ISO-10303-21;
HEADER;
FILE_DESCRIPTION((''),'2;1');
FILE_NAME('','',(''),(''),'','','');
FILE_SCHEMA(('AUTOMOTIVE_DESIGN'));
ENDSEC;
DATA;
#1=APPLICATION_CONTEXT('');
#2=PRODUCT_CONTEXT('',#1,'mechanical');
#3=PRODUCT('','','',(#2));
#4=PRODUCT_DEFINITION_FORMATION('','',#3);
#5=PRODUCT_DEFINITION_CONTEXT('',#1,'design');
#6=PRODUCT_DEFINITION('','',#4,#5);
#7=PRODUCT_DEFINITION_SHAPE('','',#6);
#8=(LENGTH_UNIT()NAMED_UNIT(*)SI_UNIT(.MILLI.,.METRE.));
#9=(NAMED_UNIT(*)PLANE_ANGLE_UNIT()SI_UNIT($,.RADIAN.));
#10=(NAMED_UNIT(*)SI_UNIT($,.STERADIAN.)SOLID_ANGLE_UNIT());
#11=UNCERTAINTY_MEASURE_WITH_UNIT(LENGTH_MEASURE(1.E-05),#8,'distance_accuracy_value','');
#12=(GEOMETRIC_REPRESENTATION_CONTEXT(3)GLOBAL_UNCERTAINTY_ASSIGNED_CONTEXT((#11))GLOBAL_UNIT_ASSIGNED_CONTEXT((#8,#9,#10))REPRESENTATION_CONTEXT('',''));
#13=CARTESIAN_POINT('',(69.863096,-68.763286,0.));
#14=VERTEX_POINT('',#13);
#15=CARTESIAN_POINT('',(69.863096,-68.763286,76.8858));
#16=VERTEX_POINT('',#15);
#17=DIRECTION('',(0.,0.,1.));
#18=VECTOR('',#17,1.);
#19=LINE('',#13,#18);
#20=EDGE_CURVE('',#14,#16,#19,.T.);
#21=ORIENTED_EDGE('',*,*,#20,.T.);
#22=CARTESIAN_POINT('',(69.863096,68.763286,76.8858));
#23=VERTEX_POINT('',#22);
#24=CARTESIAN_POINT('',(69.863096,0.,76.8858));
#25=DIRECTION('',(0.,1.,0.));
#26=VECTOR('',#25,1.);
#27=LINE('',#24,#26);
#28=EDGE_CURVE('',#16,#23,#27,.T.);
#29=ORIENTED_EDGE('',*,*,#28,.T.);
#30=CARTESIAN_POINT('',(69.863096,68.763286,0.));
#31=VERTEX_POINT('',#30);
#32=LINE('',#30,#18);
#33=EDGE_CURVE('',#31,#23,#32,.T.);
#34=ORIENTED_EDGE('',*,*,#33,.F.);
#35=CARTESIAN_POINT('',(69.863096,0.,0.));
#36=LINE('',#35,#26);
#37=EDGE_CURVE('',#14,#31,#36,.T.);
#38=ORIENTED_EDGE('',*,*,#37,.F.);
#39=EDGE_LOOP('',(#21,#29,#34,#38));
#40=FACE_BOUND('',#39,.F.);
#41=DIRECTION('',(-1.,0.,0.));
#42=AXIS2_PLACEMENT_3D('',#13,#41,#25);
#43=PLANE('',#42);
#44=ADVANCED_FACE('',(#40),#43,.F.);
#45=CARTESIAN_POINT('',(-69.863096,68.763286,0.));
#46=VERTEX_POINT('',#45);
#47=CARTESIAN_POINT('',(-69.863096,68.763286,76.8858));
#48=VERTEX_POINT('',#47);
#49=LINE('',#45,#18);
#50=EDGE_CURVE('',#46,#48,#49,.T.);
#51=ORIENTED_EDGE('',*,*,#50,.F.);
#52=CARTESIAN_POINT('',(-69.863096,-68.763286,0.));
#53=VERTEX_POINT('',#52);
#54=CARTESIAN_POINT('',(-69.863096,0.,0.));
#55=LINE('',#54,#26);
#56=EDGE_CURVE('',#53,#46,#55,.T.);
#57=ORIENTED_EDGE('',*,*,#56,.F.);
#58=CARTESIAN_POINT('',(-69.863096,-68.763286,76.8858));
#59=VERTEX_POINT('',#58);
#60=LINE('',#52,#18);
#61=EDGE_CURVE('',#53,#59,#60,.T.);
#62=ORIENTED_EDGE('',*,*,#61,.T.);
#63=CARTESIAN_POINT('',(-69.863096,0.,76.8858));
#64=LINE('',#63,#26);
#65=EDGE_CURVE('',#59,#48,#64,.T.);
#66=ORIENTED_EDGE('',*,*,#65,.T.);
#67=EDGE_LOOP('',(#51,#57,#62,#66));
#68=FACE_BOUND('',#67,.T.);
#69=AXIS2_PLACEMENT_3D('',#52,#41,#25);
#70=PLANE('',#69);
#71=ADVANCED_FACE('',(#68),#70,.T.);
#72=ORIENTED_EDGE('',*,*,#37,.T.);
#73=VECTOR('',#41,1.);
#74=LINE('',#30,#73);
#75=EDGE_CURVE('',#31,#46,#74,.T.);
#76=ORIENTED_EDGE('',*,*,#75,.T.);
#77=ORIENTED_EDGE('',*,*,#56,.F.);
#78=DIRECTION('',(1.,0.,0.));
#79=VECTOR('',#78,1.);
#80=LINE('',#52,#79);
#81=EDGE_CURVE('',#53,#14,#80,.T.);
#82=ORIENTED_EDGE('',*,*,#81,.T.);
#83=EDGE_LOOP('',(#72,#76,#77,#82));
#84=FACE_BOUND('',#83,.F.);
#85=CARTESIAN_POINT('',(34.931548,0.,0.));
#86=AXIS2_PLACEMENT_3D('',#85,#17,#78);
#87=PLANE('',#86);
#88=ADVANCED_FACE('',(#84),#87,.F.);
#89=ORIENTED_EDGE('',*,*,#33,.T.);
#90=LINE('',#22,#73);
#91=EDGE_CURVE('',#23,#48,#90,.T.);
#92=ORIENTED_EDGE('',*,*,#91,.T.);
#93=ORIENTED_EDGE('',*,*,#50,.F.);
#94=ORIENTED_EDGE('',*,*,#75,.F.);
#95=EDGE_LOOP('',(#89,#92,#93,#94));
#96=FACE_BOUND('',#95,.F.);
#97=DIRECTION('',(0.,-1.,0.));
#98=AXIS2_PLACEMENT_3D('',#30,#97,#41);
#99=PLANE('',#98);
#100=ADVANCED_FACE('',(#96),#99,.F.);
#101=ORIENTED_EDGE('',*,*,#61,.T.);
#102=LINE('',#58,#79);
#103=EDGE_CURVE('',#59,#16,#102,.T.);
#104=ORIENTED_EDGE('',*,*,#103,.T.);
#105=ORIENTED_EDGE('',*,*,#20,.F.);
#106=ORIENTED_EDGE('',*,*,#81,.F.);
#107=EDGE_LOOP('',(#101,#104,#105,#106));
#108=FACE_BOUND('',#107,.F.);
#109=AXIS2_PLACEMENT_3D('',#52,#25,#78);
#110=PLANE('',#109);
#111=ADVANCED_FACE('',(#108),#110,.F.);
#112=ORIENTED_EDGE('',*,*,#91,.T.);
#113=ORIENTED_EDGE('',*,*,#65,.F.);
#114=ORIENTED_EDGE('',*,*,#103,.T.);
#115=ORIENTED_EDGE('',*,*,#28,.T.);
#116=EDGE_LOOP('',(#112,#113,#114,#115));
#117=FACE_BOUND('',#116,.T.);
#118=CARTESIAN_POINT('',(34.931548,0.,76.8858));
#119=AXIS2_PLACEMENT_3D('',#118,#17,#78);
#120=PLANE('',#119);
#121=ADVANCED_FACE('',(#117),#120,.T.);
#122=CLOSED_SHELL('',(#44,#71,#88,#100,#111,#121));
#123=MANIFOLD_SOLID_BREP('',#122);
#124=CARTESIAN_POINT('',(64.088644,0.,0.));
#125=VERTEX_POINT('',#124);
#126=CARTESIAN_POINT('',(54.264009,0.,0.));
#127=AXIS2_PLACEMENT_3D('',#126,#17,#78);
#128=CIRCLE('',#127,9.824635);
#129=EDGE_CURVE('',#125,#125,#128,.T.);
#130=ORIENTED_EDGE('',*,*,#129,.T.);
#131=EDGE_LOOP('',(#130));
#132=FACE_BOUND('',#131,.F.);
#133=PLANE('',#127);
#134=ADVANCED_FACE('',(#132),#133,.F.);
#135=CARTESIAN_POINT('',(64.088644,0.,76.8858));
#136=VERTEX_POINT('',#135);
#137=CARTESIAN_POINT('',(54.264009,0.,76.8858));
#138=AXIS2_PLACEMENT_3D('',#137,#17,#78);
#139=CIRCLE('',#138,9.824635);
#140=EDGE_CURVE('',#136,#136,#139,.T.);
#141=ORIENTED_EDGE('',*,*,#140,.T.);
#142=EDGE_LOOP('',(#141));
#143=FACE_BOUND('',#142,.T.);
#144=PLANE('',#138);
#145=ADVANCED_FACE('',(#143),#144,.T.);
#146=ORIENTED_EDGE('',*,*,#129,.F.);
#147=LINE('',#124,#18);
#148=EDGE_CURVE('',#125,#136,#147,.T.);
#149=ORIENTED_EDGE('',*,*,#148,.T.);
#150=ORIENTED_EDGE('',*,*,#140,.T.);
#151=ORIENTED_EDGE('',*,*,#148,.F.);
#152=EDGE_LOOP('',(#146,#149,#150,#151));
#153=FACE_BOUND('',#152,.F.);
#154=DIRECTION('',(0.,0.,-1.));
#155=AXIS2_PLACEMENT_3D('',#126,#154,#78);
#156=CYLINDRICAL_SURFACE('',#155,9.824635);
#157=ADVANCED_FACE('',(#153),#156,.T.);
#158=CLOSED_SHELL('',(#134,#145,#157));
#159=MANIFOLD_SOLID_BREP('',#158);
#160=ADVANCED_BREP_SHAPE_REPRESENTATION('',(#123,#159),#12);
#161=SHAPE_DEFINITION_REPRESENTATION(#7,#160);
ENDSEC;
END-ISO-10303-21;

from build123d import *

# Parameters (mm, degrees)
F0_W     = 69.8630958796
F0_H     = 137.5265717506
F2_DEPTH = 76.8858
F1_R     = 9.8246353949


# Not quite as in the source:
# - the program builds the solid bodies; features that only make, move or delete a surface that nothing else refers to are left out


with BuildPart() as f2:
    # F0 (on Top) → F2 (new body)
    with BuildSketch(Plane.XY):
        with Locations((34.9315479398, 0)):
            Rectangle(F0_W, F0_H)
        with Locations((-34.9315479398, 0)):
            Rectangle(F0_W, F0_H)
    extrude(amount=F2_DEPTH)


with BuildPart() as f2b:
    # F1 (on Top) → F2, piece 2 (new body)
    with BuildSketch(Plane.XY):
        with Locations((54.2640089989, 0)):
            Circle(F1_R)
    extrude(amount=F2_DEPTH)


solid = Compound([f2.part, f2b.part])
